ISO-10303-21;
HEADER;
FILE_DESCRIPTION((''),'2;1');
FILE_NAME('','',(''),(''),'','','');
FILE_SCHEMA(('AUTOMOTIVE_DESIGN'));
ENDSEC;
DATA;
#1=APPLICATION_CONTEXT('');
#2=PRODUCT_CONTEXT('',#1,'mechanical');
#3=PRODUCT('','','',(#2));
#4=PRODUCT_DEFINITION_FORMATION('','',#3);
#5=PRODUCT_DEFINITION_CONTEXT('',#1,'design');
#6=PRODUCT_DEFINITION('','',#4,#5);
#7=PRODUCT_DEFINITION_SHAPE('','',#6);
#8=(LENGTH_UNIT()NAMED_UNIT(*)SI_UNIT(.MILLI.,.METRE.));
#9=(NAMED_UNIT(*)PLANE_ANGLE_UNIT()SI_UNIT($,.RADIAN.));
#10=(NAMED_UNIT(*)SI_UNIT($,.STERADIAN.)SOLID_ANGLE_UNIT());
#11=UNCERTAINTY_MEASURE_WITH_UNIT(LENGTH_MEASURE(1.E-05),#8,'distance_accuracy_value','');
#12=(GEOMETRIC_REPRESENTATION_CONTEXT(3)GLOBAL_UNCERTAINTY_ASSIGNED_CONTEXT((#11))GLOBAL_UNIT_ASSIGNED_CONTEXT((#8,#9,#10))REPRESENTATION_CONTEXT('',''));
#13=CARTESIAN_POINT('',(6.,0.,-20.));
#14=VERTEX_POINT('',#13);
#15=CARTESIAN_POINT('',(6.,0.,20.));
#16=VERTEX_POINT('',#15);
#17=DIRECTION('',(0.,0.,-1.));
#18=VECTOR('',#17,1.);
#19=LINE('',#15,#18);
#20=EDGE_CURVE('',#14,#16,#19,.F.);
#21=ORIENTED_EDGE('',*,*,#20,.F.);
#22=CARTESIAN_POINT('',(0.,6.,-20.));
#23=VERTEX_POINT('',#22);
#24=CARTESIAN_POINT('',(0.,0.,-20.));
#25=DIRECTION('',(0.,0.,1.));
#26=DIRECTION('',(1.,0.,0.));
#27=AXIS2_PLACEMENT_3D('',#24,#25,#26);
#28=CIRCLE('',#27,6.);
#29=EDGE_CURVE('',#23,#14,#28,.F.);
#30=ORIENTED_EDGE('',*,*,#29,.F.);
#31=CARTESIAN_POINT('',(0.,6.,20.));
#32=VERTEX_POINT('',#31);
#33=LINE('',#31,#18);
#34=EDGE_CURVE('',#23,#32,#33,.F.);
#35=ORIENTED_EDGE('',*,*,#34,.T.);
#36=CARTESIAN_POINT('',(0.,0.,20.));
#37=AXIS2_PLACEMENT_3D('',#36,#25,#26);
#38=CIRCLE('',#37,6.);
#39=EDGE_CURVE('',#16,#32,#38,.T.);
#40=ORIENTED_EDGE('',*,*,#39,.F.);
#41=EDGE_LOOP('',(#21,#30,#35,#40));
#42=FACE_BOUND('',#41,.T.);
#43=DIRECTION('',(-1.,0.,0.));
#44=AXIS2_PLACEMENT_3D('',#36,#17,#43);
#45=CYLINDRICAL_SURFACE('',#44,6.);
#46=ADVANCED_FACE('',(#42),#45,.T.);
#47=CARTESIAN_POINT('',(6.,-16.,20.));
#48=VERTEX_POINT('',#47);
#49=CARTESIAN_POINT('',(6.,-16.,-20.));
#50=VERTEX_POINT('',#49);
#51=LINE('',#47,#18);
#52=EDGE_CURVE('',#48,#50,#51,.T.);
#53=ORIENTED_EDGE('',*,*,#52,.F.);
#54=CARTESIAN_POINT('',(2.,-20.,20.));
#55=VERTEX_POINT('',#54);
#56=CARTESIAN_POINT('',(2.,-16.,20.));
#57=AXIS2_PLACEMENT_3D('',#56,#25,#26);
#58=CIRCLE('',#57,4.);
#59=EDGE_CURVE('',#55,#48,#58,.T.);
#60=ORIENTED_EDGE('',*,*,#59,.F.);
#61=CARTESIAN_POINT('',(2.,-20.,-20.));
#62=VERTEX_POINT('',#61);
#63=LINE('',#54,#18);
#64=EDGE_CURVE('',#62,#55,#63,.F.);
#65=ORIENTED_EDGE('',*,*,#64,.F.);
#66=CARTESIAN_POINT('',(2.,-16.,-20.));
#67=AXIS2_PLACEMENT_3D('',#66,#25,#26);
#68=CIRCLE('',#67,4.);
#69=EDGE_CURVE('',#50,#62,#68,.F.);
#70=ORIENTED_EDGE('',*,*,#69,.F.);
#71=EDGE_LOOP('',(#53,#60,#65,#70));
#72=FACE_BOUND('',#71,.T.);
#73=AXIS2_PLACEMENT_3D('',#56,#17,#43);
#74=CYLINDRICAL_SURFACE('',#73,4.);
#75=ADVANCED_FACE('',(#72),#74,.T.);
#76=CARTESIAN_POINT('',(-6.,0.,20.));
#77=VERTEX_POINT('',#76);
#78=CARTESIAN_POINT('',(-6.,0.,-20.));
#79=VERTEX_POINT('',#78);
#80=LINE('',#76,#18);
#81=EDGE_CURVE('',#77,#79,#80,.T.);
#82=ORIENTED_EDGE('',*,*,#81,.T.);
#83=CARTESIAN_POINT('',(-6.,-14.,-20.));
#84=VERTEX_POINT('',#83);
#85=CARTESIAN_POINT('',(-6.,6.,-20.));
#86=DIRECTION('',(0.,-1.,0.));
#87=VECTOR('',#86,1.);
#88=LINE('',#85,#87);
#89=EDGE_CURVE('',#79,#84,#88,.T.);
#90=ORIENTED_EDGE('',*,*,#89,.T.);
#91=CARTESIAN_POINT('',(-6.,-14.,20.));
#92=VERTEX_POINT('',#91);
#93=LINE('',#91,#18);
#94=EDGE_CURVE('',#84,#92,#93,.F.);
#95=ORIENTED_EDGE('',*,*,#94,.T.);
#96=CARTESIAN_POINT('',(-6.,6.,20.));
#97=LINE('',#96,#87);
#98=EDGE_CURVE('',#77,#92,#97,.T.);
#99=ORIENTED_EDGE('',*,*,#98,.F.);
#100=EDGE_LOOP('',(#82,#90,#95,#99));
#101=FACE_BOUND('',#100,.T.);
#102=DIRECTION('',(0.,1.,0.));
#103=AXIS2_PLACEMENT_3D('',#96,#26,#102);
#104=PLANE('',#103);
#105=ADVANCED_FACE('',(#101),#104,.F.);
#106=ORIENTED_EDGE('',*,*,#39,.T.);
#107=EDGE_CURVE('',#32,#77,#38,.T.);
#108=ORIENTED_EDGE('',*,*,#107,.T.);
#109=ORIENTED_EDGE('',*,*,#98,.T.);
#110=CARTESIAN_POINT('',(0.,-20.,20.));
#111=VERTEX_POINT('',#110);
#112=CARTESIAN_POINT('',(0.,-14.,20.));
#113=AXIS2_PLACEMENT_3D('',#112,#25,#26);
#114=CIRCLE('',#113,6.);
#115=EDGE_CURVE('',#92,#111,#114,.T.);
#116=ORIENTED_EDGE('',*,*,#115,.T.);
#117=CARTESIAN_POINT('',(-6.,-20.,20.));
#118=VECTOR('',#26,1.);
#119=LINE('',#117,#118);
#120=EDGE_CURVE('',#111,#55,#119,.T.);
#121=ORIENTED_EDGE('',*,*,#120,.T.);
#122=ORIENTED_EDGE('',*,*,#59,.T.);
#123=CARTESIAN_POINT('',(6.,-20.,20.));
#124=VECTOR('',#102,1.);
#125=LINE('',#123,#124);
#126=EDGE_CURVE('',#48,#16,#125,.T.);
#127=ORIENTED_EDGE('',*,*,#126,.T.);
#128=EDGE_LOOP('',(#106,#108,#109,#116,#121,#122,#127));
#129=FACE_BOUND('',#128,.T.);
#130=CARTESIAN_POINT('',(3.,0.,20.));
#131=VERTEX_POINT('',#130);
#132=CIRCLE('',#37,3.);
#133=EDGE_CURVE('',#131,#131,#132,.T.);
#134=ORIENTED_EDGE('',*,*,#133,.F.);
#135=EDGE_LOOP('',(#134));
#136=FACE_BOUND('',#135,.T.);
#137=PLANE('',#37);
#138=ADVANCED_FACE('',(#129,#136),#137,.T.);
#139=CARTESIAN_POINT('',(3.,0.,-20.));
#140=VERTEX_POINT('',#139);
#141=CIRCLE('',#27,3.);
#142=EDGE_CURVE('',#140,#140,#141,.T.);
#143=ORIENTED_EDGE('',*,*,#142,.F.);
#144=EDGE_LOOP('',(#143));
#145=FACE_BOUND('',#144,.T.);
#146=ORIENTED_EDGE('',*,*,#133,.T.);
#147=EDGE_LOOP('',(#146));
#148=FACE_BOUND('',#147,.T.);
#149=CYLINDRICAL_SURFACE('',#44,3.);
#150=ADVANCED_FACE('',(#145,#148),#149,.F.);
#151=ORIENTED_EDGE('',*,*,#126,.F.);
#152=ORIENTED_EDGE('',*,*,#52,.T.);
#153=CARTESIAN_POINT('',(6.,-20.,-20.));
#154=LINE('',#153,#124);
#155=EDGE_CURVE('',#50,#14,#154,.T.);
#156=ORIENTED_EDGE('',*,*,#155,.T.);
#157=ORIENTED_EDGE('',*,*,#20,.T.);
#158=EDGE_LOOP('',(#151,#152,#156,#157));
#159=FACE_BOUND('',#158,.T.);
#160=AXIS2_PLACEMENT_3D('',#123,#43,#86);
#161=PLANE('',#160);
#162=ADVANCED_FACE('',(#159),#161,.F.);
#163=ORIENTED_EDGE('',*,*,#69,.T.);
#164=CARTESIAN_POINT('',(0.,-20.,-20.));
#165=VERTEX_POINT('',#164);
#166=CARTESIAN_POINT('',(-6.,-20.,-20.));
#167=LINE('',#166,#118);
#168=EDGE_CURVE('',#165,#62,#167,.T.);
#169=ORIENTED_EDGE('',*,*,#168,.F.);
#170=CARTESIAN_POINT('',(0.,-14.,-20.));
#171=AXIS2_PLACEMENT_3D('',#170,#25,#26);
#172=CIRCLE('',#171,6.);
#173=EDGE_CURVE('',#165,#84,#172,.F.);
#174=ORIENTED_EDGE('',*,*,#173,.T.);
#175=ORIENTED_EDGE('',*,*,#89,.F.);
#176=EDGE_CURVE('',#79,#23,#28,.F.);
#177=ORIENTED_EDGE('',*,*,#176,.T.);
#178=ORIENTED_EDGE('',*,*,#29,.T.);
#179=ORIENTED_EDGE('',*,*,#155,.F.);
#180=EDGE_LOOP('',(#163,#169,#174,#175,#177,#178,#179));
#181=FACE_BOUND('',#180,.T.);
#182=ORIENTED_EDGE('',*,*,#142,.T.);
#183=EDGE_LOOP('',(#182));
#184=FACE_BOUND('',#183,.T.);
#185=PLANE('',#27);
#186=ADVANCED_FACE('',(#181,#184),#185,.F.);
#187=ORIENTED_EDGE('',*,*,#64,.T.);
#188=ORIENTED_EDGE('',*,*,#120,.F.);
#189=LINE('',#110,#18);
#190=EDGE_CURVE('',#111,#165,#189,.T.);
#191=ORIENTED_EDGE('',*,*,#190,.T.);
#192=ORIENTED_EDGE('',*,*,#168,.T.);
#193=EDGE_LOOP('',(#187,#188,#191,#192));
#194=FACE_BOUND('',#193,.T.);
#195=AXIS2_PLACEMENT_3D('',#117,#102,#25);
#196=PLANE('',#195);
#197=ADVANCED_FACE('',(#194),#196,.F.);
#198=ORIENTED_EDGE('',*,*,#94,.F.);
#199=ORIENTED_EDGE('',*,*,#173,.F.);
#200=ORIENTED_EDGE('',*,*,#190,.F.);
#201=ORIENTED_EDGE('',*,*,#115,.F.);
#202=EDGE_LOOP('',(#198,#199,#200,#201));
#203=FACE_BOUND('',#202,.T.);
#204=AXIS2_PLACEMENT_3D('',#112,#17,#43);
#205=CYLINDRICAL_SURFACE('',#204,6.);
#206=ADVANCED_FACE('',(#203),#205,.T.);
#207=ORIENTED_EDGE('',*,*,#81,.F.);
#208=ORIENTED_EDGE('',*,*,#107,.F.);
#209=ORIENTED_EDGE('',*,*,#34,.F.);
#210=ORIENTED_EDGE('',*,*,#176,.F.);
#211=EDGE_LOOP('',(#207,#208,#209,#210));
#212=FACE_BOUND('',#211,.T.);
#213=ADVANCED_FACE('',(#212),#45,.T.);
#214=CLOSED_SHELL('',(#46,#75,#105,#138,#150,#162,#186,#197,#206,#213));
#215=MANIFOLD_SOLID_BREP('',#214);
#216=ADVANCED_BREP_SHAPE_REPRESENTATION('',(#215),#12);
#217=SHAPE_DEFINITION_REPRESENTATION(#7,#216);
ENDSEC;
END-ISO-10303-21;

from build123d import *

# Parameters (mm, degrees)
SKETCH1_W           = 12
SKETCH1_H           = 26
SKETCH1_R           = 3
BOSS_EXTRUDE1_DEPTH = 20
FILLET1_R           = 6
FILLET2_R           = 4


with BuildPart() as part:
    # Sketch1 → Boss-Extrude1 (new, symmetric)
    with BuildSketch(Plane.XY):
        with Locations((0, -7)):
            Rectangle(SKETCH1_W, SKETCH1_H)
        Circle(SKETCH1_R, mode=Mode.SUBTRACT)
    extrude(amount=BOSS_EXTRUDE1_DEPTH, both=True)

    # Fillet1
    fillet1_edges = [part.edges().sort_by_distance(p)[0] for p in [
        (-6, -20, 0),
        (6, 6, 0),
        (-6, 6, 0),
    ]]
    fillet(fillet1_edges, radius=FILLET1_R - 0.0001)  # a hair under: the kernel refuses the full size

    # Fillet2
    fillet2_edges = [part.edges().sort_by_distance(p)[0] for p in [
        (6, -20, 0),
    ]]
    fillet(fillet2_edges, radius=FILLET2_R)


solid = part.part
